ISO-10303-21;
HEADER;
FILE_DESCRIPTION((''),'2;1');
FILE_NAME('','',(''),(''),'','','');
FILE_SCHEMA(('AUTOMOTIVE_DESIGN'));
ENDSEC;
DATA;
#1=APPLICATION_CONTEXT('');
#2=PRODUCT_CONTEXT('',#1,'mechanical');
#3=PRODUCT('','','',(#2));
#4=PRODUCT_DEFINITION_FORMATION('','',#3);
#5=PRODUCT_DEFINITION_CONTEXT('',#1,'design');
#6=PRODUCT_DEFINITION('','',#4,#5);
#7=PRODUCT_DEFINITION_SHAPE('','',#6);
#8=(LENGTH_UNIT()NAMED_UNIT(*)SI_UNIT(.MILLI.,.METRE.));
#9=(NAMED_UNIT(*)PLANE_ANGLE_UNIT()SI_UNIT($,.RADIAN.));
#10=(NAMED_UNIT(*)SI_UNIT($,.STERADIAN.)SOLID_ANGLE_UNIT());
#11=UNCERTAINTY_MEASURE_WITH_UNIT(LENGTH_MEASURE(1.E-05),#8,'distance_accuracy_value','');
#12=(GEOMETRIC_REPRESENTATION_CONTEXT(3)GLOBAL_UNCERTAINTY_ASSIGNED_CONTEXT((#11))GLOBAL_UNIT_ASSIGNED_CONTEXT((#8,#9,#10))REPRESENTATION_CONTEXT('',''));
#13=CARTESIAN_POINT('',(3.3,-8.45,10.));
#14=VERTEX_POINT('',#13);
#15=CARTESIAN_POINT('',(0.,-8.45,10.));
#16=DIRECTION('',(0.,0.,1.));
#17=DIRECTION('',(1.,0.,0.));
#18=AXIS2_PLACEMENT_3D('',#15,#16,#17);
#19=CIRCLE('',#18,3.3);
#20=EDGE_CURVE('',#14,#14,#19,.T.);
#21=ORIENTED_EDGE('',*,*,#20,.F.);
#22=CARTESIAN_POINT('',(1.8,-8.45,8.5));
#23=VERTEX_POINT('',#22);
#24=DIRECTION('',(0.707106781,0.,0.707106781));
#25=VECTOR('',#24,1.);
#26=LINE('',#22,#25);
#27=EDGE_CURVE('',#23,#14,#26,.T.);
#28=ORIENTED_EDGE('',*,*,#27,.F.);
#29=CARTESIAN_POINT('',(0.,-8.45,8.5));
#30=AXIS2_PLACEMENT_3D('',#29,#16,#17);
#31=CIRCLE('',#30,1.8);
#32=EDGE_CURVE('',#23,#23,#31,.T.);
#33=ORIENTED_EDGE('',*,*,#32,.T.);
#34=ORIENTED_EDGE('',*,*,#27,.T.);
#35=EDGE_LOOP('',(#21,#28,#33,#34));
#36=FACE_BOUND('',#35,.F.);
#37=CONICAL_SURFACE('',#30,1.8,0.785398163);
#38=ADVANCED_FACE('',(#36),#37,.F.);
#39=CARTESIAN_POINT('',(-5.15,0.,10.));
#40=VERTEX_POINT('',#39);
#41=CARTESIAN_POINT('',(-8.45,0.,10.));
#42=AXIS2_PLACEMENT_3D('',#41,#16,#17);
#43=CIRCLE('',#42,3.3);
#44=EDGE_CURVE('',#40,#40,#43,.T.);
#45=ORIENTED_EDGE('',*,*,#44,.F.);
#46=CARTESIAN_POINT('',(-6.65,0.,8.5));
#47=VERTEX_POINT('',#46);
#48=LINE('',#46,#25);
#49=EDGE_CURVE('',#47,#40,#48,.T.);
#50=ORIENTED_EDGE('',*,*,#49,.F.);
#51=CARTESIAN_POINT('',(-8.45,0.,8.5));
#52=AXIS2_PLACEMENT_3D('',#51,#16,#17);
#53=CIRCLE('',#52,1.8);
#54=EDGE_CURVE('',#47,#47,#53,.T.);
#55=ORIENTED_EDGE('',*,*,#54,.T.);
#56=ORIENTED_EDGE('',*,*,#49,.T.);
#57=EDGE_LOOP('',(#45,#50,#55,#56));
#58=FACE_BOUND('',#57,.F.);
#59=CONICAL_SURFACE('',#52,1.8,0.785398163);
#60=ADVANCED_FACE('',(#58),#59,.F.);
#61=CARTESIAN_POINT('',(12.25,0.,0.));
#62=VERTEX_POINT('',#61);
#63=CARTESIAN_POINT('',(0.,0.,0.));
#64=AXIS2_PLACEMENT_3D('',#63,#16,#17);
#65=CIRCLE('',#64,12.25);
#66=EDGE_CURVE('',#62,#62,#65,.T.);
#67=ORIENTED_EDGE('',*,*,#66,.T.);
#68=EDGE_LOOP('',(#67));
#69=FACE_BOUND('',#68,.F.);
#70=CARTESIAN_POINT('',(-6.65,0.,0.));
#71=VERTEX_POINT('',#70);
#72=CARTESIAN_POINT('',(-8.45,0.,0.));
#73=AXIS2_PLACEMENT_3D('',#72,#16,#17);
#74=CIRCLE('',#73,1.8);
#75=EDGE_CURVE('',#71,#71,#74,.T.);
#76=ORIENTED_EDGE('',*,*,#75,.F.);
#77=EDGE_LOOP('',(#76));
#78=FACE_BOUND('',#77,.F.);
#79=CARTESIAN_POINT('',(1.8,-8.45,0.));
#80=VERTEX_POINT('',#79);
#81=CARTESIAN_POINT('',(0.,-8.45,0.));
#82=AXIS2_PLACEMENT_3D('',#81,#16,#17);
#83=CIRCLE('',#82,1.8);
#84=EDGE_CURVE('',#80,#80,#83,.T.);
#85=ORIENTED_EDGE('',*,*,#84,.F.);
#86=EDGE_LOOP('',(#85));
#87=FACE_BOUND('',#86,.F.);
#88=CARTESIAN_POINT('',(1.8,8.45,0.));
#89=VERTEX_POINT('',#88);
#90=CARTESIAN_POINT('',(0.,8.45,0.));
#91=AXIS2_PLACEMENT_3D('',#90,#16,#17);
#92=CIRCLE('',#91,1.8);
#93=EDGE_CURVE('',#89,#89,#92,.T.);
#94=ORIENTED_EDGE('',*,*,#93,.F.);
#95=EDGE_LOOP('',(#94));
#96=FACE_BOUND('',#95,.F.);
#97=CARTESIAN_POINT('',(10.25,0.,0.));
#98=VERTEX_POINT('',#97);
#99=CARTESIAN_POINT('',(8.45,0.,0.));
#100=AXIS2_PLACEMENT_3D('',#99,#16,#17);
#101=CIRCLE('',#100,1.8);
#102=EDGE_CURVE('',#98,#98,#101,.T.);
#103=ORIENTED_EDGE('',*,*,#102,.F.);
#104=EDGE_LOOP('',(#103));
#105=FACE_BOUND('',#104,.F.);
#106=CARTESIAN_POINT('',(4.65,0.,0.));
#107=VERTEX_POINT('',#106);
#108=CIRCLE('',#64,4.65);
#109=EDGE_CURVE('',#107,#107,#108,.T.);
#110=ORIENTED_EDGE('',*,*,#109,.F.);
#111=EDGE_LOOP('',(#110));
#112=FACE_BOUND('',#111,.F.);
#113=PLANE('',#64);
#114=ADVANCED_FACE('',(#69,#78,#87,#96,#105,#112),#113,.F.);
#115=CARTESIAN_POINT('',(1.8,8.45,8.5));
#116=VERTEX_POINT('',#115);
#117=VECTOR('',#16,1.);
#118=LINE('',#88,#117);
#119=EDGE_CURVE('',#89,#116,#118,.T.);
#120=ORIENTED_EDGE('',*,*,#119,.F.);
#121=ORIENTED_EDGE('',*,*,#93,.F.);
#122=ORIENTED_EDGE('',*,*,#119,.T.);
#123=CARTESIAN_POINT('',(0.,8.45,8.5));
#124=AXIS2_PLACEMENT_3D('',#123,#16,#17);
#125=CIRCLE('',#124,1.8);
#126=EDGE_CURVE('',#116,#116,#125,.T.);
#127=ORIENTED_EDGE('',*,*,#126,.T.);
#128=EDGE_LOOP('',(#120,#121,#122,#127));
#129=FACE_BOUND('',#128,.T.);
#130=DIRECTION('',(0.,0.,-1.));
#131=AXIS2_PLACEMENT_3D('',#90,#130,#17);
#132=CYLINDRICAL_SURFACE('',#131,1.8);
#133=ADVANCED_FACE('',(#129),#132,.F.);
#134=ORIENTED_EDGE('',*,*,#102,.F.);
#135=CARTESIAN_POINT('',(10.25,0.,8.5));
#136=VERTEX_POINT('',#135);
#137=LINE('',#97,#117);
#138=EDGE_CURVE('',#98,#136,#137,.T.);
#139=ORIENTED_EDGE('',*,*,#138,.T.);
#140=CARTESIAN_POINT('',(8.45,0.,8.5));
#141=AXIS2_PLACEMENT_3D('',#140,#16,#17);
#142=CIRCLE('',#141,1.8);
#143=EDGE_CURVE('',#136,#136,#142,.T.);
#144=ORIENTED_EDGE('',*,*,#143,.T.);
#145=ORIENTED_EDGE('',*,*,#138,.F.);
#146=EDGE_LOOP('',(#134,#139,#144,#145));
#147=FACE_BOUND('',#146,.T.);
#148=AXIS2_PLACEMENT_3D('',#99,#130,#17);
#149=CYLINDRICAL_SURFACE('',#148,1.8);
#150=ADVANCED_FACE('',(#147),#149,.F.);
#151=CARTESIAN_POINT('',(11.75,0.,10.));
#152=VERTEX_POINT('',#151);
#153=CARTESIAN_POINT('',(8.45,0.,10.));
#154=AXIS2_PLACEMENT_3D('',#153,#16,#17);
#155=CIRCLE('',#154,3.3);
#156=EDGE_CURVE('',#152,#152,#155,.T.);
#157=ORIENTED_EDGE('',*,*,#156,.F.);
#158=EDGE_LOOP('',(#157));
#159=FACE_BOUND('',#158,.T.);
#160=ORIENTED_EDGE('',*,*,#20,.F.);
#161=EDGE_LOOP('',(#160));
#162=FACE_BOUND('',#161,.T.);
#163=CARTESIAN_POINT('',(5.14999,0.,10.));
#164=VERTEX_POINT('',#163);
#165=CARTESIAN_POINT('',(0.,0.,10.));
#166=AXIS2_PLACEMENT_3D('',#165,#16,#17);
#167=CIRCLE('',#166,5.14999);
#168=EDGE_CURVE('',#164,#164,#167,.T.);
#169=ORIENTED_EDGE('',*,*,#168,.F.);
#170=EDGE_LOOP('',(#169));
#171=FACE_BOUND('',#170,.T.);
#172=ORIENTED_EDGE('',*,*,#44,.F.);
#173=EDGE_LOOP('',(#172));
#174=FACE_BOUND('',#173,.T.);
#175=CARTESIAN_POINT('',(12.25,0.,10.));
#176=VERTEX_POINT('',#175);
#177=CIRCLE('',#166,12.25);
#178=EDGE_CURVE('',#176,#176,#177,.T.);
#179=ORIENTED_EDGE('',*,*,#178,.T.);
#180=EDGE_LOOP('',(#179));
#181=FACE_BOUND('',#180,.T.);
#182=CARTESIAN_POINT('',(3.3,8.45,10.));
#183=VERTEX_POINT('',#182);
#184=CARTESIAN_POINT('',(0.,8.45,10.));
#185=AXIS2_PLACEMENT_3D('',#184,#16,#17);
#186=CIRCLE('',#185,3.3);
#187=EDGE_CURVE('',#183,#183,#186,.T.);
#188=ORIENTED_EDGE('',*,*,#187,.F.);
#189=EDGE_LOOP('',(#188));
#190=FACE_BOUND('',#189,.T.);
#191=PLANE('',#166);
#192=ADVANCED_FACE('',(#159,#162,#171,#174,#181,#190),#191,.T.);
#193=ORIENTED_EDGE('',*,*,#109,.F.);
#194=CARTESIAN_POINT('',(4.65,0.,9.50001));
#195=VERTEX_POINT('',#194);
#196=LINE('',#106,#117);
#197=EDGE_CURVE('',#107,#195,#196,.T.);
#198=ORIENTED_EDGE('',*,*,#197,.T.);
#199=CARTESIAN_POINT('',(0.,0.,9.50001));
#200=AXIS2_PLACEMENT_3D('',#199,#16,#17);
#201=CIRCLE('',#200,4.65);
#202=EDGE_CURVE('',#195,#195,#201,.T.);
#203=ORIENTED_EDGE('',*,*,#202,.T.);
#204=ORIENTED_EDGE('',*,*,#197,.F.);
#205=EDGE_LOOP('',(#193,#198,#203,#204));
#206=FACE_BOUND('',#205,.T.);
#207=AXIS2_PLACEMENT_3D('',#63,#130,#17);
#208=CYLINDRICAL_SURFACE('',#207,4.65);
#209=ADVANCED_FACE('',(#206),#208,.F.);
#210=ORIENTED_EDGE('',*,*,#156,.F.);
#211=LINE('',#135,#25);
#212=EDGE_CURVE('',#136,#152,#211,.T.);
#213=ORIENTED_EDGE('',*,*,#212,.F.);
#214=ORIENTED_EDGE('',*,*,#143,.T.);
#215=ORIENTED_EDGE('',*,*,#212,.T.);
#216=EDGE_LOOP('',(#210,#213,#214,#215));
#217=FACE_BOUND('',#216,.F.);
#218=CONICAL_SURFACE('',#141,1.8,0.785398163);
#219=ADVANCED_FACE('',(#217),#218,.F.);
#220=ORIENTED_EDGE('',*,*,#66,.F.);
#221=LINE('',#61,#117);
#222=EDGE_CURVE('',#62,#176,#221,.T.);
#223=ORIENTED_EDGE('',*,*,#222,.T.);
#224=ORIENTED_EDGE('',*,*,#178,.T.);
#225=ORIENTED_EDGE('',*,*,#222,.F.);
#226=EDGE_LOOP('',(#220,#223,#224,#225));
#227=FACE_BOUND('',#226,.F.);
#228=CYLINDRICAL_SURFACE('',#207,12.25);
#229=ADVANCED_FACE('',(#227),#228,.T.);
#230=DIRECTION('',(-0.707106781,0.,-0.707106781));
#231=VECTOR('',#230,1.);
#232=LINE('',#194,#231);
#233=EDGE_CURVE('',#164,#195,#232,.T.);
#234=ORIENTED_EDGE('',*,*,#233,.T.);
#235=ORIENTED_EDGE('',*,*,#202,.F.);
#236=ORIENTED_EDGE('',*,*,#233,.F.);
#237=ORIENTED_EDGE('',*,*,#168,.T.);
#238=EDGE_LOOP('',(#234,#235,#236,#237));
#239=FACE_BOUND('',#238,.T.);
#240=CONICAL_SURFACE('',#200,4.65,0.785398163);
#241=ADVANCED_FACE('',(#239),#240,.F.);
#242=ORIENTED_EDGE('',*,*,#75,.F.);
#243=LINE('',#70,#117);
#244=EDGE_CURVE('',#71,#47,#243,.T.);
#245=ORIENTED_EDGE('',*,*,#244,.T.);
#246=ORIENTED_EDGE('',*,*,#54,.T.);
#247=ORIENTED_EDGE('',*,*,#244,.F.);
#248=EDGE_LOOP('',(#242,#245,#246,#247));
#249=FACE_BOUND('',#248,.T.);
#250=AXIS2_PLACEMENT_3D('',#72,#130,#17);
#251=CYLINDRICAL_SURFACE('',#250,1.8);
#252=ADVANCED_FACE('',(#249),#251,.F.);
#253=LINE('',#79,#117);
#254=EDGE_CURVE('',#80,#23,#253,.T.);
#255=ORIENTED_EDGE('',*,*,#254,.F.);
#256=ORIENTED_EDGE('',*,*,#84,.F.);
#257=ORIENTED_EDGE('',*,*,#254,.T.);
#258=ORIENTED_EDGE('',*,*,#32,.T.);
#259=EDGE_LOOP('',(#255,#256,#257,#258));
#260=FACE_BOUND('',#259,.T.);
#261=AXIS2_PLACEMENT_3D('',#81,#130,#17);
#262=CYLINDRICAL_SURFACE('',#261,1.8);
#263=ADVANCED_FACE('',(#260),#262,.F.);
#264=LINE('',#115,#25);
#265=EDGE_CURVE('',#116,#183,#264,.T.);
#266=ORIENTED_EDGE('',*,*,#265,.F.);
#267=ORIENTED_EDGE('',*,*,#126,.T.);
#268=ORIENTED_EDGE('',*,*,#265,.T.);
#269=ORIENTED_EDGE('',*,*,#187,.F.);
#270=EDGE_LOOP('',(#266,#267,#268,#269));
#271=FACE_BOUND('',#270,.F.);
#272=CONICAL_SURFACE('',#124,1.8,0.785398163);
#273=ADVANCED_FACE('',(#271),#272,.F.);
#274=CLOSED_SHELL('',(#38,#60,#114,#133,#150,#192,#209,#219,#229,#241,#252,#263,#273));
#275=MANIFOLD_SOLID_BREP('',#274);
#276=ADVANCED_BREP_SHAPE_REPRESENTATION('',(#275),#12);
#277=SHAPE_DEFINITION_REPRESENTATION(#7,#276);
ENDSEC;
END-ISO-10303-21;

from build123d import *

# Parameters (mm, degrees)
F0_R     = 12.25
F0_R_2   = 1.8
F0_R_3   = 4.65
F1_DEPTH = 10
F2_SIZE  = 1.5
F3_SIZE  = 0.49999


# Not quite as in the source:
# - a fillet or chamfer is up to 0.001 mm smaller than in the source, because OpenCascade refuses the exact size


with BuildPart() as f1:
    # F0 (on Top) → F1 (new body)
    with BuildSketch(Plane.XY):
        Circle(F0_R)
        with Locations((0, -8.45)):
            Circle(F0_R_2, mode=Mode.SUBTRACT)
        with Locations((-8.45, 0)):
            Circle(F0_R_2, mode=Mode.SUBTRACT)
        Circle(F0_R_3, mode=Mode.SUBTRACT)
        with Locations((8.45, 0)):
            Circle(F0_R_2, mode=Mode.SUBTRACT)
        with Locations((0, 8.45)):
            Circle(F0_R_2, mode=Mode.SUBTRACT)
    extrude(amount=F1_DEPTH)

    # F2
    f2_edges = [f1.edges().sort_by_distance(p)[0] for p in [
        (-10.25, 0, 10),
        (-1.8, 8.45, 10),
        (6.65, 0, 10),
        (-1.8, -8.45, 10),
    ]]
    chamfer(f2_edges, length=F2_SIZE)

    # F3 (size 0.5 in the source; OpenCascade refuses exactly that, so slightly less here)
    f3_edges = [f1.edges().sort_by_distance(p)[0] for p in [
        (-4.65, 0, 10),
    ]]
    chamfer(f3_edges, length=F3_SIZE)


solid = f1.part
